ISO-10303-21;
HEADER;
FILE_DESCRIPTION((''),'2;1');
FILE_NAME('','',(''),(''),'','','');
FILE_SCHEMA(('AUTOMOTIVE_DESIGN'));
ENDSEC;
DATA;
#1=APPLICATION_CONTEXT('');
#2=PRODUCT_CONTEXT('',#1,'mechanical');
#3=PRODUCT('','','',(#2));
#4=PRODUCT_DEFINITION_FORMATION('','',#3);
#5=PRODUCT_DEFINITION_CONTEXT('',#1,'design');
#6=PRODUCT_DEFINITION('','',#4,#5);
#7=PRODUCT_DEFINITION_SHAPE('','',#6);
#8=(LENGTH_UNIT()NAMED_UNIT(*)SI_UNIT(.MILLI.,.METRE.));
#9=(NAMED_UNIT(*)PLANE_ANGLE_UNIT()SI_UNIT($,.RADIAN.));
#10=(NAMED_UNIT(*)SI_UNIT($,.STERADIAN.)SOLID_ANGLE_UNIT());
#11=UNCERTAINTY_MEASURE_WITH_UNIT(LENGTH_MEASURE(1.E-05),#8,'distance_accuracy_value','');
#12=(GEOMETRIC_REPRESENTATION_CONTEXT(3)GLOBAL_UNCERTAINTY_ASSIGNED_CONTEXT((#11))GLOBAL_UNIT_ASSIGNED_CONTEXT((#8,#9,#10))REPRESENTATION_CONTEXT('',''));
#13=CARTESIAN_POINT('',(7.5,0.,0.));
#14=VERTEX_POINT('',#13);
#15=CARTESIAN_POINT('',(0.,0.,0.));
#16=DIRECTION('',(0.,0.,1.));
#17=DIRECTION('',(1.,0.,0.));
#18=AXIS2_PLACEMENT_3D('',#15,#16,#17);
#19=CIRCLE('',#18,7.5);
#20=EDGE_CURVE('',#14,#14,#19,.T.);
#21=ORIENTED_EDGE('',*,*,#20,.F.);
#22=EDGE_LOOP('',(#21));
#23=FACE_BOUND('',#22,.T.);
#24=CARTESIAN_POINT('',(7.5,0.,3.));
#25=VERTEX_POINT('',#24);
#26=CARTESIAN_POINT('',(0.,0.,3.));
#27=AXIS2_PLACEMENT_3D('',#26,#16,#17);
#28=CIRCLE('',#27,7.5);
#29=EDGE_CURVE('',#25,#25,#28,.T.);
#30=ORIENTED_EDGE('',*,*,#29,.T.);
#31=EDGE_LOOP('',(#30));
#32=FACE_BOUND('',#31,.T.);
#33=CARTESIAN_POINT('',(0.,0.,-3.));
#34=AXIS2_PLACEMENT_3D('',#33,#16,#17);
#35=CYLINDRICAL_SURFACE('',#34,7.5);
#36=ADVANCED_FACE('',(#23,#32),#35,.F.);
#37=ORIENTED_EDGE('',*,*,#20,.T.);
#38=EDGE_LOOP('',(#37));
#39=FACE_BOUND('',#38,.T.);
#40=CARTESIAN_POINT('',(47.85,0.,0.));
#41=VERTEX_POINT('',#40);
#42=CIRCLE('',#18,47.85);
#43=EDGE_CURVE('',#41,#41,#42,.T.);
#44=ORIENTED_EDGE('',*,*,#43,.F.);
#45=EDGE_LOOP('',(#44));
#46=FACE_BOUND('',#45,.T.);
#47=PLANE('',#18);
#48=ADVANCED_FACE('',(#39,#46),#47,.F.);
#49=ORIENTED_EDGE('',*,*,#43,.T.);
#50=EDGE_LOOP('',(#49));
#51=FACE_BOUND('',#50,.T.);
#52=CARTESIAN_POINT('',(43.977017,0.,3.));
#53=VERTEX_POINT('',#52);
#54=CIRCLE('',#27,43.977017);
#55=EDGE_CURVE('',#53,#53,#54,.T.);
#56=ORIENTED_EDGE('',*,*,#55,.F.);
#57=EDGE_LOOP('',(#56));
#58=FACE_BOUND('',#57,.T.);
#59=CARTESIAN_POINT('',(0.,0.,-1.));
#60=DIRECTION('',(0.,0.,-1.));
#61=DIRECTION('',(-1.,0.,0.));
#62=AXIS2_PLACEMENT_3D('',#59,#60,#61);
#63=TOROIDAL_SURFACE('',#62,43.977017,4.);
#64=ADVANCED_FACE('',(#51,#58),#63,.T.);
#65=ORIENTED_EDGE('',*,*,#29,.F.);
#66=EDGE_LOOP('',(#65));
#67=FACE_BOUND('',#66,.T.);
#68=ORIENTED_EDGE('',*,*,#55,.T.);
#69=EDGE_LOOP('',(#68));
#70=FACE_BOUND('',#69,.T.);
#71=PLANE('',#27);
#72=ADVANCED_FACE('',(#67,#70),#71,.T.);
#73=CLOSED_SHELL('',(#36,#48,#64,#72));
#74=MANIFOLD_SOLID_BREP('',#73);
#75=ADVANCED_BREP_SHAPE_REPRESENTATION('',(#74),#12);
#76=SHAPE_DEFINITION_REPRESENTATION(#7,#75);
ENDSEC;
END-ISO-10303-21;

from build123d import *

# Parameters (mm, degrees)
SKETCH1_R           = 47.85
BOSS_EXTRUDE1_DEPTH = 3
SKETCH2_R           = 7.5
CUT_EXTRUDE1_DEPTH  = 6
FILLET2_R           = 4


with BuildPart() as part:
    # Sketch1 → Boss-Extrude1 (new body)
    with BuildSketch(Plane.XY):
        Circle(SKETCH1_R)
    extrude(amount=BOSS_EXTRUDE1_DEPTH)

    # Sketch2 → Cut-Extrude1 (cut)
    with BuildSketch(Plane.XY.offset(3)):
        Circle(SKETCH2_R)
    extrude(amount=-CUT_EXTRUDE1_DEPTH, mode=Mode.SUBTRACT)

    # Fillet2
    # the kernel refuses this fillet: 4 mm, written as the material it takes off along each edge
    with BuildSketch(Plane(origin=(0, 0, 3), x_dir=(1, 0, 0), z_dir=(0, -1, 0))) as fillet2_piece_1:
        with BuildLine():
            CenterArc((43.977016654, -4), FILLET2_R, 14.477512186, 75.522487814)
            Line((43.977016654, 0), (43.977016654, 0.08))
            Line((43.977016654, 0.08), (47.85, 0.08))
            Line((47.85, 0.08), (47.93, 0))
            ThreePointArc((47.93, 0), (47.93, -1.5), (47.927459667, -2.98))
            Line((47.927459667, -2.98), (47.85, -3))
        make_face()
    revolve(axis=Axis((0, 0, 3), (0, 0, 1)), mode=Mode.SUBTRACT)


solid = part.part
